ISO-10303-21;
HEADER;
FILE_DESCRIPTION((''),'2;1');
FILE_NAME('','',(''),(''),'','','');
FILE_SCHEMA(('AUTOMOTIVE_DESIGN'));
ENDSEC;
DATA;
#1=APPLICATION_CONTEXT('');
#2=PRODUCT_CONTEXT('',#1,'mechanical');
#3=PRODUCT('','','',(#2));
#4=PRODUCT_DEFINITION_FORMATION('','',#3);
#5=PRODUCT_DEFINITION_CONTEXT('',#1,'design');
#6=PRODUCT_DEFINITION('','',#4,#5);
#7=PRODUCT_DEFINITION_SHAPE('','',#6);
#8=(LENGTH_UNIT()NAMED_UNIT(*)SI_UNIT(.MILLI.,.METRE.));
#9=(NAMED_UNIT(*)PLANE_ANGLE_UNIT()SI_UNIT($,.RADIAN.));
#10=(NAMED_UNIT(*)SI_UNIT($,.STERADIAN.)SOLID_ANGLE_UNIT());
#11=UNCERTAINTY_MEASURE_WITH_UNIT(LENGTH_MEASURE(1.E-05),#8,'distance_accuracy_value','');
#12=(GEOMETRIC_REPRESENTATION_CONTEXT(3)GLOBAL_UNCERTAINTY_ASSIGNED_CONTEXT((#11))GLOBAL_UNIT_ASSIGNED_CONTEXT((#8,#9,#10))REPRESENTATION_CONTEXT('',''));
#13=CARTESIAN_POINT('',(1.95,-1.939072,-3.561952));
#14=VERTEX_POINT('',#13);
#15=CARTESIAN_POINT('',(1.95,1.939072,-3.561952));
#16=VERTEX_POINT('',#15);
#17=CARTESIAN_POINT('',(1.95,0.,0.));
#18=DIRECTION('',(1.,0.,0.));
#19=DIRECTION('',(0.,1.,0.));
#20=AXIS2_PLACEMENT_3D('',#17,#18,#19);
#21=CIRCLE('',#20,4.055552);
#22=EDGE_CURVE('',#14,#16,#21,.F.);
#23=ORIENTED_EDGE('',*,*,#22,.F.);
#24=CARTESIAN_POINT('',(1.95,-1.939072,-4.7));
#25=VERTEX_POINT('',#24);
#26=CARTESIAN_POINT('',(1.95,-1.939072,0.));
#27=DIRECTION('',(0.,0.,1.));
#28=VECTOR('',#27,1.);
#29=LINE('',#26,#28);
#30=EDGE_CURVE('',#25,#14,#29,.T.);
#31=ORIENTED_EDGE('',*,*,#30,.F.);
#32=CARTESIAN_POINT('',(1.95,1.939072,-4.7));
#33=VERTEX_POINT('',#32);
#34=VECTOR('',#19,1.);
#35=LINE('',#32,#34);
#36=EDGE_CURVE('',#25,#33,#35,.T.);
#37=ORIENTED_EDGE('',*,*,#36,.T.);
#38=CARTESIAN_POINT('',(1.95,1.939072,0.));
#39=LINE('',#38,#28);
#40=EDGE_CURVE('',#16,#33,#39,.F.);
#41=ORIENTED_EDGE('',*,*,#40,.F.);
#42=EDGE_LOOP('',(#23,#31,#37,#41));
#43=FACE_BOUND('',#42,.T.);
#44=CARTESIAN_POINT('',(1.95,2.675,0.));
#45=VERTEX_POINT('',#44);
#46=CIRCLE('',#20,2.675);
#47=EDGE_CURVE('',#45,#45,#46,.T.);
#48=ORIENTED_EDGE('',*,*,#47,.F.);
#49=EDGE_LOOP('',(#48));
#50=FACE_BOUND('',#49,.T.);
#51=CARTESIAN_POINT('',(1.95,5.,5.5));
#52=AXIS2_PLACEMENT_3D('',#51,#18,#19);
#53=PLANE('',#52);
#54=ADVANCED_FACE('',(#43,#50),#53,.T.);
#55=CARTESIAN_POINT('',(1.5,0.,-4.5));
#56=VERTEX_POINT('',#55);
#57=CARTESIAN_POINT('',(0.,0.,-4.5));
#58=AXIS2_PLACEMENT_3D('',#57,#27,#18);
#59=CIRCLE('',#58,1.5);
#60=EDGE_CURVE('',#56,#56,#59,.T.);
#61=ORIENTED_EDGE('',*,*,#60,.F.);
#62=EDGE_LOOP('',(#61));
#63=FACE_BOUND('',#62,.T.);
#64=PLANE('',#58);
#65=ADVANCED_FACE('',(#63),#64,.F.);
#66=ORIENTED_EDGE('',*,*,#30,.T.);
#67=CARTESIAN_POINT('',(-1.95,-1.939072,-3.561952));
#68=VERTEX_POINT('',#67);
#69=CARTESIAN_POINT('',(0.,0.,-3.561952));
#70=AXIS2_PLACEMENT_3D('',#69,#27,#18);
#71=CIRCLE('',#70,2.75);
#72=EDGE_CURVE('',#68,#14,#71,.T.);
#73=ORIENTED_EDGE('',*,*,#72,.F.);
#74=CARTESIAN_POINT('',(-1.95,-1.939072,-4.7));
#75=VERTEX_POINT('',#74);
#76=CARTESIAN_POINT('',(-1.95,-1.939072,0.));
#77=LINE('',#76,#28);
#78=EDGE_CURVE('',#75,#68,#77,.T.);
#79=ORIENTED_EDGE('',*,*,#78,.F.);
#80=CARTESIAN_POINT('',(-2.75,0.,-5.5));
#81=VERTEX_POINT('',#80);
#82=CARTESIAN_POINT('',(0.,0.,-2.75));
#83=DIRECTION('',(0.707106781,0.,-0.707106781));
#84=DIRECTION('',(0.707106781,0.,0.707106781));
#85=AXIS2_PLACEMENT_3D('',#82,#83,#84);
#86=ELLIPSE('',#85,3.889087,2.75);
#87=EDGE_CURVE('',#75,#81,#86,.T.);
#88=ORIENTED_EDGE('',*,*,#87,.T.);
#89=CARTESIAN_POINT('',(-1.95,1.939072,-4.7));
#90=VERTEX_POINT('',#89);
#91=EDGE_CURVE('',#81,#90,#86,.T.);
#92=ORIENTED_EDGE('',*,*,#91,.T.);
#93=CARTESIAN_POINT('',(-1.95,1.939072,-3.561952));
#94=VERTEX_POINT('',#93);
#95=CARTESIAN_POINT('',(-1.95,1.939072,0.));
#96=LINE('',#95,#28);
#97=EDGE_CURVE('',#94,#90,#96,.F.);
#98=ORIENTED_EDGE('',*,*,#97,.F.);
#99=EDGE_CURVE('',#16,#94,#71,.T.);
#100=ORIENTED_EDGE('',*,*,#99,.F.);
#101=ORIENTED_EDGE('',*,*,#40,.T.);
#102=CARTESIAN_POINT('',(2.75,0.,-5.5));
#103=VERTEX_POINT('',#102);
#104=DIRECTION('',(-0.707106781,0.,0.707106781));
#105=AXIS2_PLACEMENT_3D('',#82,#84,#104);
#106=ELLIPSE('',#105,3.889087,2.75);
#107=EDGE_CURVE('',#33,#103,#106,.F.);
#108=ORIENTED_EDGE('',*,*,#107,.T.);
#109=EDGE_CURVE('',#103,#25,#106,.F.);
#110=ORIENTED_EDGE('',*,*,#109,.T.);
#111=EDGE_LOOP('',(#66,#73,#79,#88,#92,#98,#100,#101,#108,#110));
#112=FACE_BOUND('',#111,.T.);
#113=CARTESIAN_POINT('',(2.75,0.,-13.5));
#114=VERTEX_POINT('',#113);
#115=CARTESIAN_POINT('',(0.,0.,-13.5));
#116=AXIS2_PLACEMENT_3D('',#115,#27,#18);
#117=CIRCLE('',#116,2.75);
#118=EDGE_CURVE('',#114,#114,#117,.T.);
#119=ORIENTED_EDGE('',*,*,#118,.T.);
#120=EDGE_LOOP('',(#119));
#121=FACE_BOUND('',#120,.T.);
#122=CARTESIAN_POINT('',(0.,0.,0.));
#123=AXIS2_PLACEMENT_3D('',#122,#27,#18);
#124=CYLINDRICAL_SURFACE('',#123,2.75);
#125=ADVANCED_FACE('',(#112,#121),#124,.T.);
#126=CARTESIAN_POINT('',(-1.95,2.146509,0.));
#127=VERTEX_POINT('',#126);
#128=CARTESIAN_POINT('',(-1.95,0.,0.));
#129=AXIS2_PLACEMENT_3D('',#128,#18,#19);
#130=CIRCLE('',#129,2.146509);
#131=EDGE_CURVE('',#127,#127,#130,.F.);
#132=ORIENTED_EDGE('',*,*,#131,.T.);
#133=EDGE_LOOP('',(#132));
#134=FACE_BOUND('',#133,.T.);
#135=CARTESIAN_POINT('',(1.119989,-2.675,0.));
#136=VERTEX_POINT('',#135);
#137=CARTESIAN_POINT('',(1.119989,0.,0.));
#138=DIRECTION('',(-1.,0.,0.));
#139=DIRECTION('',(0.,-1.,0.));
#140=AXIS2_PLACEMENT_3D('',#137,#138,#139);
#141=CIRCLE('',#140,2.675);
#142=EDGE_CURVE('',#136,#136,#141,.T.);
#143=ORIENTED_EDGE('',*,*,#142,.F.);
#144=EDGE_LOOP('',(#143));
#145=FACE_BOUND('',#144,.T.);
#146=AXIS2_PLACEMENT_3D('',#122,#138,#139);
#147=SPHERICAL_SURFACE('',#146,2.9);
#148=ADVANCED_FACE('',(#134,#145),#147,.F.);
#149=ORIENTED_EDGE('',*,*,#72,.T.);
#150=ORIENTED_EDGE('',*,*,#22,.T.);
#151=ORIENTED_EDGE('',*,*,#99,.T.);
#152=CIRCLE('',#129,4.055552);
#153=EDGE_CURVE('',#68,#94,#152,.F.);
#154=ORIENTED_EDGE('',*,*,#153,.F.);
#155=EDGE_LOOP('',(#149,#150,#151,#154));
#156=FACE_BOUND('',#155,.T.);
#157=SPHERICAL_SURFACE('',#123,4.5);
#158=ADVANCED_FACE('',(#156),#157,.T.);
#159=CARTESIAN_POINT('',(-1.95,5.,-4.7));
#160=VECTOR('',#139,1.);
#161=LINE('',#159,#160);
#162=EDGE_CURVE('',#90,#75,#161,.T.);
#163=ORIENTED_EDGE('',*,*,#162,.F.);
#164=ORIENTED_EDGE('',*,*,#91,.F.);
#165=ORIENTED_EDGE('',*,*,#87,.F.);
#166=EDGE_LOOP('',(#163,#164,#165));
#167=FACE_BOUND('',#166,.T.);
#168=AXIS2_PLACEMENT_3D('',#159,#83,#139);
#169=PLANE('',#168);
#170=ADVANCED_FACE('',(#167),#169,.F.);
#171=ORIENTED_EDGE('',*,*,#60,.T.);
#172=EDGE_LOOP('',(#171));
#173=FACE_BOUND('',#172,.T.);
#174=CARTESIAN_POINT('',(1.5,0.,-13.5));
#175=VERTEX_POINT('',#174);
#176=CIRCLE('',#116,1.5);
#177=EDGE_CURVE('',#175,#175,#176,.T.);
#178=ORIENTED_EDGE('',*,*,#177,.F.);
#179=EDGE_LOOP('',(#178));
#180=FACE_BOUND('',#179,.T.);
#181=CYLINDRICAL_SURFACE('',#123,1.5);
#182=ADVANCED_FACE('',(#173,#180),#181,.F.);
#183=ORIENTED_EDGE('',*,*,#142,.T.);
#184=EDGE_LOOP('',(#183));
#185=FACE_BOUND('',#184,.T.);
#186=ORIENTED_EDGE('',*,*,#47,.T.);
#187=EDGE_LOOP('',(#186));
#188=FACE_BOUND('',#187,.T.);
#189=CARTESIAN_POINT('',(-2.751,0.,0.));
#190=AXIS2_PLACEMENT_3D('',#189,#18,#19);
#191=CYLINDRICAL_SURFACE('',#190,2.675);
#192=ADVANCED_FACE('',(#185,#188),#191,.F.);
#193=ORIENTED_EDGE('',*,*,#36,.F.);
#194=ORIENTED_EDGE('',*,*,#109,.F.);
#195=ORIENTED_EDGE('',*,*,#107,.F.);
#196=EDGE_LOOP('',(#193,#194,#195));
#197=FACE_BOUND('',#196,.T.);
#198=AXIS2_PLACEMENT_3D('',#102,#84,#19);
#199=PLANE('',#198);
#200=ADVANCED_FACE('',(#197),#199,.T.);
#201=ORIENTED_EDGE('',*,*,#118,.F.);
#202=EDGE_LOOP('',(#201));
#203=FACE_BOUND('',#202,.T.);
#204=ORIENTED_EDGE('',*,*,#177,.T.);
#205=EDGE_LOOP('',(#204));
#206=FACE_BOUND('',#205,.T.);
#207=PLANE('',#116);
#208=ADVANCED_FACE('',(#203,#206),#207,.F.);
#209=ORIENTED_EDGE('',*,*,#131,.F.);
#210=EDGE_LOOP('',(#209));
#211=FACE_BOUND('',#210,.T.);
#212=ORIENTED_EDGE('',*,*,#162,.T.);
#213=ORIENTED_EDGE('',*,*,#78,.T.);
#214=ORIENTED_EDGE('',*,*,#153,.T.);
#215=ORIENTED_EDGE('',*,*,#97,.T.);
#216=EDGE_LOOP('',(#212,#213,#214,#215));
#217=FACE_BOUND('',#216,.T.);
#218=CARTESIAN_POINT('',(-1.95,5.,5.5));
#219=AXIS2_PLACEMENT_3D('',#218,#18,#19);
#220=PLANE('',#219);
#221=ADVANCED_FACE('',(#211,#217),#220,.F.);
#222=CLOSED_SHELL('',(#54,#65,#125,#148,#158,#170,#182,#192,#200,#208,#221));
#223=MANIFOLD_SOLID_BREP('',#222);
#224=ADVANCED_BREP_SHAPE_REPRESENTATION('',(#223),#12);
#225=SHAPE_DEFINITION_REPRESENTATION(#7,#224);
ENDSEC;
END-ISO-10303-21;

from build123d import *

# Parameters (mm, degrees)
CUT_EXTRUDE_2_DEPTH      = 5.5
CUT_EXTRUDE_2_DEPTH_BACK = 5.5
SKETCH_2_OUTSIDE_W       = 15.41
SKETCH_2_OUTSIDE_H       = 15.41
SKETCH_2_OUTSIDE_W_2     = 3.9
SKETCH_2_OUTSIDE_H_2     = 10
CHAMFER_2_SIZE           = 0.8
CUT_EXTRUDE_START        = -0.830011261
CUT_EXTRUDE_3_OUTLINE_R  = 2.675
CUT_EXTRUDE_3_DEPTH      = 0.830011261


# Read off the part's stored shape, not the designer's step: Вырез-Вытянуть3
with BuildPart() as part:
    # Эскиз1 → Повернуть1 (revolve)
    with BuildSketch(Plane(origin=(0, 0, 0), x_dir=(1, 0, 0), z_dir=(0, 1, 0))):
        with BuildLine():
            ThreePointArc((0, 2.9), (2.9, 0), (0, -2.9))
            Line((0, -2.9), (0, -4.5))
            ThreePointArc((0, -4.5), (4.259036435, -1.452793395), (2.75, 3.561951712))
            Line((2.75, 3.561951712), (2.75, 13.5))
            Line((2.75, 13.5), (1.5, 13.5))
            Line((1.5, 13.5), (1.5, 4.5))
            Line((1.5, 4.5), (0, 4.5))
            Line((0, 4.5), (0, 2.9))
        make_face()
    revolve(axis=Axis((0, 0, 0), (0, 0, -1)))

    # Эскиз2 outside → Вырез-Вытянуть2 (cut, two sides: drawn at the far end of the back side and taken through both)
    with BuildSketch(Plane.XY.offset(-CUT_EXTRUDE_2_DEPTH_BACK)):
        Rectangle(SKETCH_2_OUTSIDE_W, SKETCH_2_OUTSIDE_H)
        Rectangle(SKETCH_2_OUTSIDE_W_2, SKETCH_2_OUTSIDE_H_2, mode=Mode.SUBTRACT)
    extrude(amount=CUT_EXTRUDE_2_DEPTH + CUT_EXTRUDE_2_DEPTH_BACK, mode=Mode.SUBTRACT)

    # Фаска2
    chamfer_2_edges = [part.edges().sort_by_distance(p)[0] for p in [
        (1.95, 0, -5.5),
        (-1.95, 0, -5.5),
    ]]
    chamfer(chamfer_2_edges, length=CHAMFER_2_SIZE - 0.0001)  # a hair under: the kernel refuses the full size

    # Вырез-Вытянуть3 outline → Вырез-Вытянуть3 (cut)
    with BuildSketch(Plane(origin=(1.95, 0, 0), x_dir=(0, 0, -1), z_dir=(1, 0, 0)).offset(CUT_EXTRUDE_START)):
        Circle(CUT_EXTRUDE_3_OUTLINE_R)
    extrude(amount=CUT_EXTRUDE_3_DEPTH, mode=Mode.SUBTRACT)


solid = part.part
